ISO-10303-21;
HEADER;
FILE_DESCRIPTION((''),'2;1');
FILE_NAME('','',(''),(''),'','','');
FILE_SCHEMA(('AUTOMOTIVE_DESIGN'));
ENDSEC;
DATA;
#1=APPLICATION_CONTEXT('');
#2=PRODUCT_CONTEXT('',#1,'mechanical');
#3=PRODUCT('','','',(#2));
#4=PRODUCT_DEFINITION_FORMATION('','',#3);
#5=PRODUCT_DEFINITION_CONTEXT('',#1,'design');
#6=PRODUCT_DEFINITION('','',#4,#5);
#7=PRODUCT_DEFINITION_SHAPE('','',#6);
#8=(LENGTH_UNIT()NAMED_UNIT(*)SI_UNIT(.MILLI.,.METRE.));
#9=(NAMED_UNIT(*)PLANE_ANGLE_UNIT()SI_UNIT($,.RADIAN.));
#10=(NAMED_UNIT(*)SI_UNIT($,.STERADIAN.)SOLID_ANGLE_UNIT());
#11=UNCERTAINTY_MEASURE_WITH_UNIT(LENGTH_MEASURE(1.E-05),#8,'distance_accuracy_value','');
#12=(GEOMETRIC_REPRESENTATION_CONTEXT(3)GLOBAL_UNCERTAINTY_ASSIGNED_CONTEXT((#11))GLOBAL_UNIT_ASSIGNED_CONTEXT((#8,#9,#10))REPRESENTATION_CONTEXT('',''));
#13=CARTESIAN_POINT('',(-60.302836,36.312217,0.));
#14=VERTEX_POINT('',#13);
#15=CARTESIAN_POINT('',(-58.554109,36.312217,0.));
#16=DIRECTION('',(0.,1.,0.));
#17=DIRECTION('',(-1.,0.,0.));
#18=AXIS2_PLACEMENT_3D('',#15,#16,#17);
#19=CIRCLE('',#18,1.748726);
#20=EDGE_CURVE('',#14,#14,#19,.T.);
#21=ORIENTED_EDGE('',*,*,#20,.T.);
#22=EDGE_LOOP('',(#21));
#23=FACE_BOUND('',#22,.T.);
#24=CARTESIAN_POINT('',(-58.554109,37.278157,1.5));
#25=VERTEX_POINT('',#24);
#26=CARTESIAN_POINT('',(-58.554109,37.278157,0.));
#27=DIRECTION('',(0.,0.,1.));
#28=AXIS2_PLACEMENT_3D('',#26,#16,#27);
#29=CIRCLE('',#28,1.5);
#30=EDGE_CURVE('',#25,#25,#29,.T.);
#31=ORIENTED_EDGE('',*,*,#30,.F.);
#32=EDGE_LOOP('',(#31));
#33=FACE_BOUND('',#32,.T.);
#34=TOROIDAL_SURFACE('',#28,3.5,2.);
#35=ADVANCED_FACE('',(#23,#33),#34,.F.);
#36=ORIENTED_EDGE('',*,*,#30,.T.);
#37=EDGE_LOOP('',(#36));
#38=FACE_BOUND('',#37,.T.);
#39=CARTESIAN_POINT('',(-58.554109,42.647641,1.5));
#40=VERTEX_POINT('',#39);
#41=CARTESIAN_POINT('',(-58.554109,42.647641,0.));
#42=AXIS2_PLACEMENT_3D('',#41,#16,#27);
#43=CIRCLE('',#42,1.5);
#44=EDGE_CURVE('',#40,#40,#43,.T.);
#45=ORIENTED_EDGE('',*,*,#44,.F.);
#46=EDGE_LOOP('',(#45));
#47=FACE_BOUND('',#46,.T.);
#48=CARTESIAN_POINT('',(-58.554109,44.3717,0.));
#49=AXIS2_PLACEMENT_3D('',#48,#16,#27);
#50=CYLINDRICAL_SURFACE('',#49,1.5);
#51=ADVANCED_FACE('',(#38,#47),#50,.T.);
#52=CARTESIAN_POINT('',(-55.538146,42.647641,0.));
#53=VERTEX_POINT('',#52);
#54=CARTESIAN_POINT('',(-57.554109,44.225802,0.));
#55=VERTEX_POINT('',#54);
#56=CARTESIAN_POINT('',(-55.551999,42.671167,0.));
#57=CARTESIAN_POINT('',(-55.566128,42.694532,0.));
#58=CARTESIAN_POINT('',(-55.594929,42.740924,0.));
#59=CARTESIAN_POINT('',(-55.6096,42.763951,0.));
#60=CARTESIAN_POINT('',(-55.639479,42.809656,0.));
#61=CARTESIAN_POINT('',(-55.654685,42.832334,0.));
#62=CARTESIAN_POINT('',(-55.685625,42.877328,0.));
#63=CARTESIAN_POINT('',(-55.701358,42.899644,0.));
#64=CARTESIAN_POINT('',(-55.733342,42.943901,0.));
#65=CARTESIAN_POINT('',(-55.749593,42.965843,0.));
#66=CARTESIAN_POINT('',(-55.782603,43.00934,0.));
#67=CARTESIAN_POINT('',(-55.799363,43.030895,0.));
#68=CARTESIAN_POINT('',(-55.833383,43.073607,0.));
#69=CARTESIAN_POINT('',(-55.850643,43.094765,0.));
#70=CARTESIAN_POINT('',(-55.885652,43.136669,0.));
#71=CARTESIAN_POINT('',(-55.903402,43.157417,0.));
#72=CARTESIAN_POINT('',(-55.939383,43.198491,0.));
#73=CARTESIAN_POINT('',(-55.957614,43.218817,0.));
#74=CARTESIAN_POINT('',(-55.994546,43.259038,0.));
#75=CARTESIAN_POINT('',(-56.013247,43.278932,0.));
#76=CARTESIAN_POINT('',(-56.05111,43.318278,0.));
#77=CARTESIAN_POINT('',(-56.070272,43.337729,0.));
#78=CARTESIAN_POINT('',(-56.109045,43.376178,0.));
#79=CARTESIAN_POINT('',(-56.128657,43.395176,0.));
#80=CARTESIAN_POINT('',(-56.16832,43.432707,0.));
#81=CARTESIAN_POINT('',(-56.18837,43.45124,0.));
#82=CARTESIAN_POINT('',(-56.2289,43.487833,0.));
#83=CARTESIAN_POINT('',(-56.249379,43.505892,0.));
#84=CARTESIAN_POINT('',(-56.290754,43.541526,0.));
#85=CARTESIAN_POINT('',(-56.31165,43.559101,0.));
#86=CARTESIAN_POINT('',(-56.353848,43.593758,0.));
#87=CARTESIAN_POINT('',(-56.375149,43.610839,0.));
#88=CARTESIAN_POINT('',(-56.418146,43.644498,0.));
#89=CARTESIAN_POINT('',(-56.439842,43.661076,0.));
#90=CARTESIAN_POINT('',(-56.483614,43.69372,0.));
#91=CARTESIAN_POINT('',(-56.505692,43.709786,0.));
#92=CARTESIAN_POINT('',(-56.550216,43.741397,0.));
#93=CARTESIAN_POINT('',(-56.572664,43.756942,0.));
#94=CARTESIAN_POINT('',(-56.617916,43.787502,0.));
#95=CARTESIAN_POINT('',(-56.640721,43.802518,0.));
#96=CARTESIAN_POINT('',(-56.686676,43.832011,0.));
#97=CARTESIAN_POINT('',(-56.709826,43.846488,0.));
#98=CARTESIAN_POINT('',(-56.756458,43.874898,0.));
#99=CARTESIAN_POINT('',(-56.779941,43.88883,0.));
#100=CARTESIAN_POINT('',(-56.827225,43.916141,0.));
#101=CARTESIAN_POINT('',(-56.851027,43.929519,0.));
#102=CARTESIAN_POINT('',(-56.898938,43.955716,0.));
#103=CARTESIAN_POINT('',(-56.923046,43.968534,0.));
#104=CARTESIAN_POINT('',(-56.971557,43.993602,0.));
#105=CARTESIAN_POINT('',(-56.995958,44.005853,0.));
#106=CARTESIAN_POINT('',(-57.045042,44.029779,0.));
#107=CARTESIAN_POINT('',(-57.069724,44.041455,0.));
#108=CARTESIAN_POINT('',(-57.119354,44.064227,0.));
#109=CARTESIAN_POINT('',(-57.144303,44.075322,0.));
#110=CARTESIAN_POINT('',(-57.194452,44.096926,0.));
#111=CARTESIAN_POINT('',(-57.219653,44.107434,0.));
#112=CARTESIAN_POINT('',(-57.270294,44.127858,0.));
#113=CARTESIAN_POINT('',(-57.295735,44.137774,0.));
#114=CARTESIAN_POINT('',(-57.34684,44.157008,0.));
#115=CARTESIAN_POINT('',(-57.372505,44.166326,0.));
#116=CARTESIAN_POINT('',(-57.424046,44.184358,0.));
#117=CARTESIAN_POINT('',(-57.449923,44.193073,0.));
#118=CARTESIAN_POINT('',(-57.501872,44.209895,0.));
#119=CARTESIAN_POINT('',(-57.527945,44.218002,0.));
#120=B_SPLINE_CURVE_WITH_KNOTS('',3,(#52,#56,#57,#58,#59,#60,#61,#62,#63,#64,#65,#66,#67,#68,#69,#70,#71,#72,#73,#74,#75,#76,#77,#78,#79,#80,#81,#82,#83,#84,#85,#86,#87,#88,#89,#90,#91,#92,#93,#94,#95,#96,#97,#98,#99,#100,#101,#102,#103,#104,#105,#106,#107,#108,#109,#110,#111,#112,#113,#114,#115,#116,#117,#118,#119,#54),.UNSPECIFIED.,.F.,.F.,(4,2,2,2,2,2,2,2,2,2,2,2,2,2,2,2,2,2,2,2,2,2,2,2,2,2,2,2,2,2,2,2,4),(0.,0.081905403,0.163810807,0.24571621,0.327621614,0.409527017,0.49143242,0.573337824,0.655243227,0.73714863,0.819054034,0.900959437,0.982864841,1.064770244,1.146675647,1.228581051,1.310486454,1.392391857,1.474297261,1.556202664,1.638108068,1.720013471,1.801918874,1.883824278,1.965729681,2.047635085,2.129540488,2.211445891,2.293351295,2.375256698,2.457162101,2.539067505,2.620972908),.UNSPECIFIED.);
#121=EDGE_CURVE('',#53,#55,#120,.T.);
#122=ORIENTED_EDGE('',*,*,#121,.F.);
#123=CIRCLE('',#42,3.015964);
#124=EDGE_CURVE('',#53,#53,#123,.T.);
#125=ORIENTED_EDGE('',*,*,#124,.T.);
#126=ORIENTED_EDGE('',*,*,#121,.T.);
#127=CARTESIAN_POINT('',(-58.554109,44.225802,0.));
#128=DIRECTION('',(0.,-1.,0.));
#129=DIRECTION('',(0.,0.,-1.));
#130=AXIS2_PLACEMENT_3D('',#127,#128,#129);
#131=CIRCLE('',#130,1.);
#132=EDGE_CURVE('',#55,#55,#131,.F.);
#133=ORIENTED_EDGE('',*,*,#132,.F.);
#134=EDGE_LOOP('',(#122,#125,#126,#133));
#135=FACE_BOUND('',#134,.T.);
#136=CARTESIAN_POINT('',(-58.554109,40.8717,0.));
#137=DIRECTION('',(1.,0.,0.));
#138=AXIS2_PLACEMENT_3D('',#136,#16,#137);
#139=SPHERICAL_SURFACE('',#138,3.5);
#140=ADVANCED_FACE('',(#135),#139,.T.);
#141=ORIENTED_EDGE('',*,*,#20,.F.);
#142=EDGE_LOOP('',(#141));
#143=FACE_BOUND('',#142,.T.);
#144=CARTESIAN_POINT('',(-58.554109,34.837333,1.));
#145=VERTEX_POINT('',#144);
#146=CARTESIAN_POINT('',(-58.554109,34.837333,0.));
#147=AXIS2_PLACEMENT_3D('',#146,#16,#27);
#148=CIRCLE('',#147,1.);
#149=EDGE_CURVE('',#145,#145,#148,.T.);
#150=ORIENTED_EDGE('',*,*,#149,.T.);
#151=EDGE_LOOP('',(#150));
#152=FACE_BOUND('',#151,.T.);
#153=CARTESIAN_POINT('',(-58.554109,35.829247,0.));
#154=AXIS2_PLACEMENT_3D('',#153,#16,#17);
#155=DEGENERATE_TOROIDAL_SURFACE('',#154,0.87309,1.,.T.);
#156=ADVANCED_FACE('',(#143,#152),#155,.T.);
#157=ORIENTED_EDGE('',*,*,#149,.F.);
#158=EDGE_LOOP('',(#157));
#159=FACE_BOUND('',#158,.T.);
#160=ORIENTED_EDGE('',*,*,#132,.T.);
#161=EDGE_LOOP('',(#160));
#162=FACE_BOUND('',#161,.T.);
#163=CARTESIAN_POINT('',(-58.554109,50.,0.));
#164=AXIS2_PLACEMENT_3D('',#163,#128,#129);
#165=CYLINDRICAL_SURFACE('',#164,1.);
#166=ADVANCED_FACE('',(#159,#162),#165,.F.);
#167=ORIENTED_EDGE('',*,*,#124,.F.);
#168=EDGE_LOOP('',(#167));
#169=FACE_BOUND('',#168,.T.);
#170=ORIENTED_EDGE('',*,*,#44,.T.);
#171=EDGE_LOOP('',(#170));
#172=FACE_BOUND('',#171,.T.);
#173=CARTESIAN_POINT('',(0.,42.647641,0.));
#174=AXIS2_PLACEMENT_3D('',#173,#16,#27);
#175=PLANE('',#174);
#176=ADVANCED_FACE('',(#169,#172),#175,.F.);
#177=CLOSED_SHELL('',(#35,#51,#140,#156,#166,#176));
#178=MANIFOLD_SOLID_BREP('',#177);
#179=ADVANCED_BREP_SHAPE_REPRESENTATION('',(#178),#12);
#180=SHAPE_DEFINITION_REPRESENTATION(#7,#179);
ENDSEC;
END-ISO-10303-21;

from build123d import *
from build123d.topology import SkipClean

# Parameters (mm, degrees)
SKETCH_2_R          = 1
CUT_EXTRUDE_1_DEPTH = 50
SKETCH_3_W          = 30
SKETCH_3_H          = 1.543001366
CUT_EXTRUDE_2_DEPTH = 5
FILLET_1_R          = 1


with BuildPart() as part:
    # 草图1 → 旋转1 (revolve)
    with SkipClean():  # the faces are left unmerged after this step: merging them gives an invalid solid
        with BuildSketch(Plane.XY):
            with BuildLine():
                Line((-57.054109227, 42.647640507), (-58.554109227, 42.647640507))
                Line((-58.554109227, 42.647640507), (-58.554109227, 33.247028335))
                ThreePointArc((-58.554109227, 33.247028335), (-56.797365364, 34.258679156), (-56.790595512, 36.285879333))
                ThreePointArc((-56.790595512, 36.285879333), (-56.987108525, 36.764821339), (-57.054109227, 37.278157209))
                Line((-57.054109227, 37.278157209), (-57.054109227, 42.647640507))
            make_face()
            with BuildLine():
                ThreePointArc((-58.554109227, 44.37170043), (-60.291090766, 43.910268372), (-61.570072895, 42.647640507))
                Line((-61.570072895, 42.647640507), (-60.054109227, 42.647640507))
                Line((-60.054109227, 42.647640507), (-58.554109227, 42.647640507))
                Line((-58.554109227, 42.647640507), (-58.554109227, 44.37170043))
            make_face()
            with BuildLine():
                ThreePointArc((-55.53814556, 42.647640507), (-56.817127689, 43.910268372), (-58.554109227, 44.37170043))
                Line((-58.554109227, 44.37170043), (-58.554109227, 42.647640507))
                Line((-58.554109227, 42.647640507), (-57.054109227, 42.647640507))
                Line((-57.054109227, 42.647640507), (-55.53814556, 42.647640507))
            make_face()
        revolve(axis=Axis((-58.554109227, 44.37170043, 0), (0, -1, 0)))
    add(part.part.scale(1), mode=Mode.REPLACE)  # the faces are merged on a copy

    # 草图2 → 切除-拉伸1 (cut)
    with BuildSketch(Plane(origin=(0, 0, 0), x_dir=(1, 0, 0), z_dir=(0, 1, 0))):
        with Locations((-58.554109227, 0)):
            Circle(SKETCH_2_R)
    extrude(amount=CUT_EXTRUDE_1_DEPTH, mode=Mode.SUBTRACT)

    # 草图3 → 切除-拉伸2 (cut, symmetric)
    with BuildSketch(Plane.XY):
        with Locations((-45.847587109, 34.065831969)):
            Rectangle(SKETCH_3_W, SKETCH_3_H)
    extrude(amount=CUT_EXTRUDE_2_DEPTH, both=True, mode=Mode.SUBTRACT)

    # 圆角1
    # the kernel refuses this fillet: 1 mm, written as the material it takes off along each edge
    with BuildSketch(Plane(origin=(-58.554109227, 34.837332652, 0), x_dir=(1, 0, 0), z_dir=(0, 0, 1))) as fillet_1_piece_1:
        with BuildLine():
            CenterArc((0.873089514, 0.991914174), FILLET_1_R, 277.291097339, 111.588468761)
            Line((1.748726343, 1.474884302), (1.836290026, 1.523181315))
            ThreePointArc((1.836290026, 1.523181315), (1.85033803, 1.498160575), (2.080331258, -0.021703426))
            Line((2.080331258, -0.021703426), (1.982714859, -0.1))
            ThreePointArc((1.982714859, -0.1), (1.49135743, -0.1), (1.012691049, -0.099191417))
            Line((1.012691049, -0.099191417), (1, 0))
        make_face()
    revolve(axis=Axis((-58.554109227, 34.837332652, 0), (0, 1, 0)), mode=Mode.SUBTRACT)


solid = part.part
